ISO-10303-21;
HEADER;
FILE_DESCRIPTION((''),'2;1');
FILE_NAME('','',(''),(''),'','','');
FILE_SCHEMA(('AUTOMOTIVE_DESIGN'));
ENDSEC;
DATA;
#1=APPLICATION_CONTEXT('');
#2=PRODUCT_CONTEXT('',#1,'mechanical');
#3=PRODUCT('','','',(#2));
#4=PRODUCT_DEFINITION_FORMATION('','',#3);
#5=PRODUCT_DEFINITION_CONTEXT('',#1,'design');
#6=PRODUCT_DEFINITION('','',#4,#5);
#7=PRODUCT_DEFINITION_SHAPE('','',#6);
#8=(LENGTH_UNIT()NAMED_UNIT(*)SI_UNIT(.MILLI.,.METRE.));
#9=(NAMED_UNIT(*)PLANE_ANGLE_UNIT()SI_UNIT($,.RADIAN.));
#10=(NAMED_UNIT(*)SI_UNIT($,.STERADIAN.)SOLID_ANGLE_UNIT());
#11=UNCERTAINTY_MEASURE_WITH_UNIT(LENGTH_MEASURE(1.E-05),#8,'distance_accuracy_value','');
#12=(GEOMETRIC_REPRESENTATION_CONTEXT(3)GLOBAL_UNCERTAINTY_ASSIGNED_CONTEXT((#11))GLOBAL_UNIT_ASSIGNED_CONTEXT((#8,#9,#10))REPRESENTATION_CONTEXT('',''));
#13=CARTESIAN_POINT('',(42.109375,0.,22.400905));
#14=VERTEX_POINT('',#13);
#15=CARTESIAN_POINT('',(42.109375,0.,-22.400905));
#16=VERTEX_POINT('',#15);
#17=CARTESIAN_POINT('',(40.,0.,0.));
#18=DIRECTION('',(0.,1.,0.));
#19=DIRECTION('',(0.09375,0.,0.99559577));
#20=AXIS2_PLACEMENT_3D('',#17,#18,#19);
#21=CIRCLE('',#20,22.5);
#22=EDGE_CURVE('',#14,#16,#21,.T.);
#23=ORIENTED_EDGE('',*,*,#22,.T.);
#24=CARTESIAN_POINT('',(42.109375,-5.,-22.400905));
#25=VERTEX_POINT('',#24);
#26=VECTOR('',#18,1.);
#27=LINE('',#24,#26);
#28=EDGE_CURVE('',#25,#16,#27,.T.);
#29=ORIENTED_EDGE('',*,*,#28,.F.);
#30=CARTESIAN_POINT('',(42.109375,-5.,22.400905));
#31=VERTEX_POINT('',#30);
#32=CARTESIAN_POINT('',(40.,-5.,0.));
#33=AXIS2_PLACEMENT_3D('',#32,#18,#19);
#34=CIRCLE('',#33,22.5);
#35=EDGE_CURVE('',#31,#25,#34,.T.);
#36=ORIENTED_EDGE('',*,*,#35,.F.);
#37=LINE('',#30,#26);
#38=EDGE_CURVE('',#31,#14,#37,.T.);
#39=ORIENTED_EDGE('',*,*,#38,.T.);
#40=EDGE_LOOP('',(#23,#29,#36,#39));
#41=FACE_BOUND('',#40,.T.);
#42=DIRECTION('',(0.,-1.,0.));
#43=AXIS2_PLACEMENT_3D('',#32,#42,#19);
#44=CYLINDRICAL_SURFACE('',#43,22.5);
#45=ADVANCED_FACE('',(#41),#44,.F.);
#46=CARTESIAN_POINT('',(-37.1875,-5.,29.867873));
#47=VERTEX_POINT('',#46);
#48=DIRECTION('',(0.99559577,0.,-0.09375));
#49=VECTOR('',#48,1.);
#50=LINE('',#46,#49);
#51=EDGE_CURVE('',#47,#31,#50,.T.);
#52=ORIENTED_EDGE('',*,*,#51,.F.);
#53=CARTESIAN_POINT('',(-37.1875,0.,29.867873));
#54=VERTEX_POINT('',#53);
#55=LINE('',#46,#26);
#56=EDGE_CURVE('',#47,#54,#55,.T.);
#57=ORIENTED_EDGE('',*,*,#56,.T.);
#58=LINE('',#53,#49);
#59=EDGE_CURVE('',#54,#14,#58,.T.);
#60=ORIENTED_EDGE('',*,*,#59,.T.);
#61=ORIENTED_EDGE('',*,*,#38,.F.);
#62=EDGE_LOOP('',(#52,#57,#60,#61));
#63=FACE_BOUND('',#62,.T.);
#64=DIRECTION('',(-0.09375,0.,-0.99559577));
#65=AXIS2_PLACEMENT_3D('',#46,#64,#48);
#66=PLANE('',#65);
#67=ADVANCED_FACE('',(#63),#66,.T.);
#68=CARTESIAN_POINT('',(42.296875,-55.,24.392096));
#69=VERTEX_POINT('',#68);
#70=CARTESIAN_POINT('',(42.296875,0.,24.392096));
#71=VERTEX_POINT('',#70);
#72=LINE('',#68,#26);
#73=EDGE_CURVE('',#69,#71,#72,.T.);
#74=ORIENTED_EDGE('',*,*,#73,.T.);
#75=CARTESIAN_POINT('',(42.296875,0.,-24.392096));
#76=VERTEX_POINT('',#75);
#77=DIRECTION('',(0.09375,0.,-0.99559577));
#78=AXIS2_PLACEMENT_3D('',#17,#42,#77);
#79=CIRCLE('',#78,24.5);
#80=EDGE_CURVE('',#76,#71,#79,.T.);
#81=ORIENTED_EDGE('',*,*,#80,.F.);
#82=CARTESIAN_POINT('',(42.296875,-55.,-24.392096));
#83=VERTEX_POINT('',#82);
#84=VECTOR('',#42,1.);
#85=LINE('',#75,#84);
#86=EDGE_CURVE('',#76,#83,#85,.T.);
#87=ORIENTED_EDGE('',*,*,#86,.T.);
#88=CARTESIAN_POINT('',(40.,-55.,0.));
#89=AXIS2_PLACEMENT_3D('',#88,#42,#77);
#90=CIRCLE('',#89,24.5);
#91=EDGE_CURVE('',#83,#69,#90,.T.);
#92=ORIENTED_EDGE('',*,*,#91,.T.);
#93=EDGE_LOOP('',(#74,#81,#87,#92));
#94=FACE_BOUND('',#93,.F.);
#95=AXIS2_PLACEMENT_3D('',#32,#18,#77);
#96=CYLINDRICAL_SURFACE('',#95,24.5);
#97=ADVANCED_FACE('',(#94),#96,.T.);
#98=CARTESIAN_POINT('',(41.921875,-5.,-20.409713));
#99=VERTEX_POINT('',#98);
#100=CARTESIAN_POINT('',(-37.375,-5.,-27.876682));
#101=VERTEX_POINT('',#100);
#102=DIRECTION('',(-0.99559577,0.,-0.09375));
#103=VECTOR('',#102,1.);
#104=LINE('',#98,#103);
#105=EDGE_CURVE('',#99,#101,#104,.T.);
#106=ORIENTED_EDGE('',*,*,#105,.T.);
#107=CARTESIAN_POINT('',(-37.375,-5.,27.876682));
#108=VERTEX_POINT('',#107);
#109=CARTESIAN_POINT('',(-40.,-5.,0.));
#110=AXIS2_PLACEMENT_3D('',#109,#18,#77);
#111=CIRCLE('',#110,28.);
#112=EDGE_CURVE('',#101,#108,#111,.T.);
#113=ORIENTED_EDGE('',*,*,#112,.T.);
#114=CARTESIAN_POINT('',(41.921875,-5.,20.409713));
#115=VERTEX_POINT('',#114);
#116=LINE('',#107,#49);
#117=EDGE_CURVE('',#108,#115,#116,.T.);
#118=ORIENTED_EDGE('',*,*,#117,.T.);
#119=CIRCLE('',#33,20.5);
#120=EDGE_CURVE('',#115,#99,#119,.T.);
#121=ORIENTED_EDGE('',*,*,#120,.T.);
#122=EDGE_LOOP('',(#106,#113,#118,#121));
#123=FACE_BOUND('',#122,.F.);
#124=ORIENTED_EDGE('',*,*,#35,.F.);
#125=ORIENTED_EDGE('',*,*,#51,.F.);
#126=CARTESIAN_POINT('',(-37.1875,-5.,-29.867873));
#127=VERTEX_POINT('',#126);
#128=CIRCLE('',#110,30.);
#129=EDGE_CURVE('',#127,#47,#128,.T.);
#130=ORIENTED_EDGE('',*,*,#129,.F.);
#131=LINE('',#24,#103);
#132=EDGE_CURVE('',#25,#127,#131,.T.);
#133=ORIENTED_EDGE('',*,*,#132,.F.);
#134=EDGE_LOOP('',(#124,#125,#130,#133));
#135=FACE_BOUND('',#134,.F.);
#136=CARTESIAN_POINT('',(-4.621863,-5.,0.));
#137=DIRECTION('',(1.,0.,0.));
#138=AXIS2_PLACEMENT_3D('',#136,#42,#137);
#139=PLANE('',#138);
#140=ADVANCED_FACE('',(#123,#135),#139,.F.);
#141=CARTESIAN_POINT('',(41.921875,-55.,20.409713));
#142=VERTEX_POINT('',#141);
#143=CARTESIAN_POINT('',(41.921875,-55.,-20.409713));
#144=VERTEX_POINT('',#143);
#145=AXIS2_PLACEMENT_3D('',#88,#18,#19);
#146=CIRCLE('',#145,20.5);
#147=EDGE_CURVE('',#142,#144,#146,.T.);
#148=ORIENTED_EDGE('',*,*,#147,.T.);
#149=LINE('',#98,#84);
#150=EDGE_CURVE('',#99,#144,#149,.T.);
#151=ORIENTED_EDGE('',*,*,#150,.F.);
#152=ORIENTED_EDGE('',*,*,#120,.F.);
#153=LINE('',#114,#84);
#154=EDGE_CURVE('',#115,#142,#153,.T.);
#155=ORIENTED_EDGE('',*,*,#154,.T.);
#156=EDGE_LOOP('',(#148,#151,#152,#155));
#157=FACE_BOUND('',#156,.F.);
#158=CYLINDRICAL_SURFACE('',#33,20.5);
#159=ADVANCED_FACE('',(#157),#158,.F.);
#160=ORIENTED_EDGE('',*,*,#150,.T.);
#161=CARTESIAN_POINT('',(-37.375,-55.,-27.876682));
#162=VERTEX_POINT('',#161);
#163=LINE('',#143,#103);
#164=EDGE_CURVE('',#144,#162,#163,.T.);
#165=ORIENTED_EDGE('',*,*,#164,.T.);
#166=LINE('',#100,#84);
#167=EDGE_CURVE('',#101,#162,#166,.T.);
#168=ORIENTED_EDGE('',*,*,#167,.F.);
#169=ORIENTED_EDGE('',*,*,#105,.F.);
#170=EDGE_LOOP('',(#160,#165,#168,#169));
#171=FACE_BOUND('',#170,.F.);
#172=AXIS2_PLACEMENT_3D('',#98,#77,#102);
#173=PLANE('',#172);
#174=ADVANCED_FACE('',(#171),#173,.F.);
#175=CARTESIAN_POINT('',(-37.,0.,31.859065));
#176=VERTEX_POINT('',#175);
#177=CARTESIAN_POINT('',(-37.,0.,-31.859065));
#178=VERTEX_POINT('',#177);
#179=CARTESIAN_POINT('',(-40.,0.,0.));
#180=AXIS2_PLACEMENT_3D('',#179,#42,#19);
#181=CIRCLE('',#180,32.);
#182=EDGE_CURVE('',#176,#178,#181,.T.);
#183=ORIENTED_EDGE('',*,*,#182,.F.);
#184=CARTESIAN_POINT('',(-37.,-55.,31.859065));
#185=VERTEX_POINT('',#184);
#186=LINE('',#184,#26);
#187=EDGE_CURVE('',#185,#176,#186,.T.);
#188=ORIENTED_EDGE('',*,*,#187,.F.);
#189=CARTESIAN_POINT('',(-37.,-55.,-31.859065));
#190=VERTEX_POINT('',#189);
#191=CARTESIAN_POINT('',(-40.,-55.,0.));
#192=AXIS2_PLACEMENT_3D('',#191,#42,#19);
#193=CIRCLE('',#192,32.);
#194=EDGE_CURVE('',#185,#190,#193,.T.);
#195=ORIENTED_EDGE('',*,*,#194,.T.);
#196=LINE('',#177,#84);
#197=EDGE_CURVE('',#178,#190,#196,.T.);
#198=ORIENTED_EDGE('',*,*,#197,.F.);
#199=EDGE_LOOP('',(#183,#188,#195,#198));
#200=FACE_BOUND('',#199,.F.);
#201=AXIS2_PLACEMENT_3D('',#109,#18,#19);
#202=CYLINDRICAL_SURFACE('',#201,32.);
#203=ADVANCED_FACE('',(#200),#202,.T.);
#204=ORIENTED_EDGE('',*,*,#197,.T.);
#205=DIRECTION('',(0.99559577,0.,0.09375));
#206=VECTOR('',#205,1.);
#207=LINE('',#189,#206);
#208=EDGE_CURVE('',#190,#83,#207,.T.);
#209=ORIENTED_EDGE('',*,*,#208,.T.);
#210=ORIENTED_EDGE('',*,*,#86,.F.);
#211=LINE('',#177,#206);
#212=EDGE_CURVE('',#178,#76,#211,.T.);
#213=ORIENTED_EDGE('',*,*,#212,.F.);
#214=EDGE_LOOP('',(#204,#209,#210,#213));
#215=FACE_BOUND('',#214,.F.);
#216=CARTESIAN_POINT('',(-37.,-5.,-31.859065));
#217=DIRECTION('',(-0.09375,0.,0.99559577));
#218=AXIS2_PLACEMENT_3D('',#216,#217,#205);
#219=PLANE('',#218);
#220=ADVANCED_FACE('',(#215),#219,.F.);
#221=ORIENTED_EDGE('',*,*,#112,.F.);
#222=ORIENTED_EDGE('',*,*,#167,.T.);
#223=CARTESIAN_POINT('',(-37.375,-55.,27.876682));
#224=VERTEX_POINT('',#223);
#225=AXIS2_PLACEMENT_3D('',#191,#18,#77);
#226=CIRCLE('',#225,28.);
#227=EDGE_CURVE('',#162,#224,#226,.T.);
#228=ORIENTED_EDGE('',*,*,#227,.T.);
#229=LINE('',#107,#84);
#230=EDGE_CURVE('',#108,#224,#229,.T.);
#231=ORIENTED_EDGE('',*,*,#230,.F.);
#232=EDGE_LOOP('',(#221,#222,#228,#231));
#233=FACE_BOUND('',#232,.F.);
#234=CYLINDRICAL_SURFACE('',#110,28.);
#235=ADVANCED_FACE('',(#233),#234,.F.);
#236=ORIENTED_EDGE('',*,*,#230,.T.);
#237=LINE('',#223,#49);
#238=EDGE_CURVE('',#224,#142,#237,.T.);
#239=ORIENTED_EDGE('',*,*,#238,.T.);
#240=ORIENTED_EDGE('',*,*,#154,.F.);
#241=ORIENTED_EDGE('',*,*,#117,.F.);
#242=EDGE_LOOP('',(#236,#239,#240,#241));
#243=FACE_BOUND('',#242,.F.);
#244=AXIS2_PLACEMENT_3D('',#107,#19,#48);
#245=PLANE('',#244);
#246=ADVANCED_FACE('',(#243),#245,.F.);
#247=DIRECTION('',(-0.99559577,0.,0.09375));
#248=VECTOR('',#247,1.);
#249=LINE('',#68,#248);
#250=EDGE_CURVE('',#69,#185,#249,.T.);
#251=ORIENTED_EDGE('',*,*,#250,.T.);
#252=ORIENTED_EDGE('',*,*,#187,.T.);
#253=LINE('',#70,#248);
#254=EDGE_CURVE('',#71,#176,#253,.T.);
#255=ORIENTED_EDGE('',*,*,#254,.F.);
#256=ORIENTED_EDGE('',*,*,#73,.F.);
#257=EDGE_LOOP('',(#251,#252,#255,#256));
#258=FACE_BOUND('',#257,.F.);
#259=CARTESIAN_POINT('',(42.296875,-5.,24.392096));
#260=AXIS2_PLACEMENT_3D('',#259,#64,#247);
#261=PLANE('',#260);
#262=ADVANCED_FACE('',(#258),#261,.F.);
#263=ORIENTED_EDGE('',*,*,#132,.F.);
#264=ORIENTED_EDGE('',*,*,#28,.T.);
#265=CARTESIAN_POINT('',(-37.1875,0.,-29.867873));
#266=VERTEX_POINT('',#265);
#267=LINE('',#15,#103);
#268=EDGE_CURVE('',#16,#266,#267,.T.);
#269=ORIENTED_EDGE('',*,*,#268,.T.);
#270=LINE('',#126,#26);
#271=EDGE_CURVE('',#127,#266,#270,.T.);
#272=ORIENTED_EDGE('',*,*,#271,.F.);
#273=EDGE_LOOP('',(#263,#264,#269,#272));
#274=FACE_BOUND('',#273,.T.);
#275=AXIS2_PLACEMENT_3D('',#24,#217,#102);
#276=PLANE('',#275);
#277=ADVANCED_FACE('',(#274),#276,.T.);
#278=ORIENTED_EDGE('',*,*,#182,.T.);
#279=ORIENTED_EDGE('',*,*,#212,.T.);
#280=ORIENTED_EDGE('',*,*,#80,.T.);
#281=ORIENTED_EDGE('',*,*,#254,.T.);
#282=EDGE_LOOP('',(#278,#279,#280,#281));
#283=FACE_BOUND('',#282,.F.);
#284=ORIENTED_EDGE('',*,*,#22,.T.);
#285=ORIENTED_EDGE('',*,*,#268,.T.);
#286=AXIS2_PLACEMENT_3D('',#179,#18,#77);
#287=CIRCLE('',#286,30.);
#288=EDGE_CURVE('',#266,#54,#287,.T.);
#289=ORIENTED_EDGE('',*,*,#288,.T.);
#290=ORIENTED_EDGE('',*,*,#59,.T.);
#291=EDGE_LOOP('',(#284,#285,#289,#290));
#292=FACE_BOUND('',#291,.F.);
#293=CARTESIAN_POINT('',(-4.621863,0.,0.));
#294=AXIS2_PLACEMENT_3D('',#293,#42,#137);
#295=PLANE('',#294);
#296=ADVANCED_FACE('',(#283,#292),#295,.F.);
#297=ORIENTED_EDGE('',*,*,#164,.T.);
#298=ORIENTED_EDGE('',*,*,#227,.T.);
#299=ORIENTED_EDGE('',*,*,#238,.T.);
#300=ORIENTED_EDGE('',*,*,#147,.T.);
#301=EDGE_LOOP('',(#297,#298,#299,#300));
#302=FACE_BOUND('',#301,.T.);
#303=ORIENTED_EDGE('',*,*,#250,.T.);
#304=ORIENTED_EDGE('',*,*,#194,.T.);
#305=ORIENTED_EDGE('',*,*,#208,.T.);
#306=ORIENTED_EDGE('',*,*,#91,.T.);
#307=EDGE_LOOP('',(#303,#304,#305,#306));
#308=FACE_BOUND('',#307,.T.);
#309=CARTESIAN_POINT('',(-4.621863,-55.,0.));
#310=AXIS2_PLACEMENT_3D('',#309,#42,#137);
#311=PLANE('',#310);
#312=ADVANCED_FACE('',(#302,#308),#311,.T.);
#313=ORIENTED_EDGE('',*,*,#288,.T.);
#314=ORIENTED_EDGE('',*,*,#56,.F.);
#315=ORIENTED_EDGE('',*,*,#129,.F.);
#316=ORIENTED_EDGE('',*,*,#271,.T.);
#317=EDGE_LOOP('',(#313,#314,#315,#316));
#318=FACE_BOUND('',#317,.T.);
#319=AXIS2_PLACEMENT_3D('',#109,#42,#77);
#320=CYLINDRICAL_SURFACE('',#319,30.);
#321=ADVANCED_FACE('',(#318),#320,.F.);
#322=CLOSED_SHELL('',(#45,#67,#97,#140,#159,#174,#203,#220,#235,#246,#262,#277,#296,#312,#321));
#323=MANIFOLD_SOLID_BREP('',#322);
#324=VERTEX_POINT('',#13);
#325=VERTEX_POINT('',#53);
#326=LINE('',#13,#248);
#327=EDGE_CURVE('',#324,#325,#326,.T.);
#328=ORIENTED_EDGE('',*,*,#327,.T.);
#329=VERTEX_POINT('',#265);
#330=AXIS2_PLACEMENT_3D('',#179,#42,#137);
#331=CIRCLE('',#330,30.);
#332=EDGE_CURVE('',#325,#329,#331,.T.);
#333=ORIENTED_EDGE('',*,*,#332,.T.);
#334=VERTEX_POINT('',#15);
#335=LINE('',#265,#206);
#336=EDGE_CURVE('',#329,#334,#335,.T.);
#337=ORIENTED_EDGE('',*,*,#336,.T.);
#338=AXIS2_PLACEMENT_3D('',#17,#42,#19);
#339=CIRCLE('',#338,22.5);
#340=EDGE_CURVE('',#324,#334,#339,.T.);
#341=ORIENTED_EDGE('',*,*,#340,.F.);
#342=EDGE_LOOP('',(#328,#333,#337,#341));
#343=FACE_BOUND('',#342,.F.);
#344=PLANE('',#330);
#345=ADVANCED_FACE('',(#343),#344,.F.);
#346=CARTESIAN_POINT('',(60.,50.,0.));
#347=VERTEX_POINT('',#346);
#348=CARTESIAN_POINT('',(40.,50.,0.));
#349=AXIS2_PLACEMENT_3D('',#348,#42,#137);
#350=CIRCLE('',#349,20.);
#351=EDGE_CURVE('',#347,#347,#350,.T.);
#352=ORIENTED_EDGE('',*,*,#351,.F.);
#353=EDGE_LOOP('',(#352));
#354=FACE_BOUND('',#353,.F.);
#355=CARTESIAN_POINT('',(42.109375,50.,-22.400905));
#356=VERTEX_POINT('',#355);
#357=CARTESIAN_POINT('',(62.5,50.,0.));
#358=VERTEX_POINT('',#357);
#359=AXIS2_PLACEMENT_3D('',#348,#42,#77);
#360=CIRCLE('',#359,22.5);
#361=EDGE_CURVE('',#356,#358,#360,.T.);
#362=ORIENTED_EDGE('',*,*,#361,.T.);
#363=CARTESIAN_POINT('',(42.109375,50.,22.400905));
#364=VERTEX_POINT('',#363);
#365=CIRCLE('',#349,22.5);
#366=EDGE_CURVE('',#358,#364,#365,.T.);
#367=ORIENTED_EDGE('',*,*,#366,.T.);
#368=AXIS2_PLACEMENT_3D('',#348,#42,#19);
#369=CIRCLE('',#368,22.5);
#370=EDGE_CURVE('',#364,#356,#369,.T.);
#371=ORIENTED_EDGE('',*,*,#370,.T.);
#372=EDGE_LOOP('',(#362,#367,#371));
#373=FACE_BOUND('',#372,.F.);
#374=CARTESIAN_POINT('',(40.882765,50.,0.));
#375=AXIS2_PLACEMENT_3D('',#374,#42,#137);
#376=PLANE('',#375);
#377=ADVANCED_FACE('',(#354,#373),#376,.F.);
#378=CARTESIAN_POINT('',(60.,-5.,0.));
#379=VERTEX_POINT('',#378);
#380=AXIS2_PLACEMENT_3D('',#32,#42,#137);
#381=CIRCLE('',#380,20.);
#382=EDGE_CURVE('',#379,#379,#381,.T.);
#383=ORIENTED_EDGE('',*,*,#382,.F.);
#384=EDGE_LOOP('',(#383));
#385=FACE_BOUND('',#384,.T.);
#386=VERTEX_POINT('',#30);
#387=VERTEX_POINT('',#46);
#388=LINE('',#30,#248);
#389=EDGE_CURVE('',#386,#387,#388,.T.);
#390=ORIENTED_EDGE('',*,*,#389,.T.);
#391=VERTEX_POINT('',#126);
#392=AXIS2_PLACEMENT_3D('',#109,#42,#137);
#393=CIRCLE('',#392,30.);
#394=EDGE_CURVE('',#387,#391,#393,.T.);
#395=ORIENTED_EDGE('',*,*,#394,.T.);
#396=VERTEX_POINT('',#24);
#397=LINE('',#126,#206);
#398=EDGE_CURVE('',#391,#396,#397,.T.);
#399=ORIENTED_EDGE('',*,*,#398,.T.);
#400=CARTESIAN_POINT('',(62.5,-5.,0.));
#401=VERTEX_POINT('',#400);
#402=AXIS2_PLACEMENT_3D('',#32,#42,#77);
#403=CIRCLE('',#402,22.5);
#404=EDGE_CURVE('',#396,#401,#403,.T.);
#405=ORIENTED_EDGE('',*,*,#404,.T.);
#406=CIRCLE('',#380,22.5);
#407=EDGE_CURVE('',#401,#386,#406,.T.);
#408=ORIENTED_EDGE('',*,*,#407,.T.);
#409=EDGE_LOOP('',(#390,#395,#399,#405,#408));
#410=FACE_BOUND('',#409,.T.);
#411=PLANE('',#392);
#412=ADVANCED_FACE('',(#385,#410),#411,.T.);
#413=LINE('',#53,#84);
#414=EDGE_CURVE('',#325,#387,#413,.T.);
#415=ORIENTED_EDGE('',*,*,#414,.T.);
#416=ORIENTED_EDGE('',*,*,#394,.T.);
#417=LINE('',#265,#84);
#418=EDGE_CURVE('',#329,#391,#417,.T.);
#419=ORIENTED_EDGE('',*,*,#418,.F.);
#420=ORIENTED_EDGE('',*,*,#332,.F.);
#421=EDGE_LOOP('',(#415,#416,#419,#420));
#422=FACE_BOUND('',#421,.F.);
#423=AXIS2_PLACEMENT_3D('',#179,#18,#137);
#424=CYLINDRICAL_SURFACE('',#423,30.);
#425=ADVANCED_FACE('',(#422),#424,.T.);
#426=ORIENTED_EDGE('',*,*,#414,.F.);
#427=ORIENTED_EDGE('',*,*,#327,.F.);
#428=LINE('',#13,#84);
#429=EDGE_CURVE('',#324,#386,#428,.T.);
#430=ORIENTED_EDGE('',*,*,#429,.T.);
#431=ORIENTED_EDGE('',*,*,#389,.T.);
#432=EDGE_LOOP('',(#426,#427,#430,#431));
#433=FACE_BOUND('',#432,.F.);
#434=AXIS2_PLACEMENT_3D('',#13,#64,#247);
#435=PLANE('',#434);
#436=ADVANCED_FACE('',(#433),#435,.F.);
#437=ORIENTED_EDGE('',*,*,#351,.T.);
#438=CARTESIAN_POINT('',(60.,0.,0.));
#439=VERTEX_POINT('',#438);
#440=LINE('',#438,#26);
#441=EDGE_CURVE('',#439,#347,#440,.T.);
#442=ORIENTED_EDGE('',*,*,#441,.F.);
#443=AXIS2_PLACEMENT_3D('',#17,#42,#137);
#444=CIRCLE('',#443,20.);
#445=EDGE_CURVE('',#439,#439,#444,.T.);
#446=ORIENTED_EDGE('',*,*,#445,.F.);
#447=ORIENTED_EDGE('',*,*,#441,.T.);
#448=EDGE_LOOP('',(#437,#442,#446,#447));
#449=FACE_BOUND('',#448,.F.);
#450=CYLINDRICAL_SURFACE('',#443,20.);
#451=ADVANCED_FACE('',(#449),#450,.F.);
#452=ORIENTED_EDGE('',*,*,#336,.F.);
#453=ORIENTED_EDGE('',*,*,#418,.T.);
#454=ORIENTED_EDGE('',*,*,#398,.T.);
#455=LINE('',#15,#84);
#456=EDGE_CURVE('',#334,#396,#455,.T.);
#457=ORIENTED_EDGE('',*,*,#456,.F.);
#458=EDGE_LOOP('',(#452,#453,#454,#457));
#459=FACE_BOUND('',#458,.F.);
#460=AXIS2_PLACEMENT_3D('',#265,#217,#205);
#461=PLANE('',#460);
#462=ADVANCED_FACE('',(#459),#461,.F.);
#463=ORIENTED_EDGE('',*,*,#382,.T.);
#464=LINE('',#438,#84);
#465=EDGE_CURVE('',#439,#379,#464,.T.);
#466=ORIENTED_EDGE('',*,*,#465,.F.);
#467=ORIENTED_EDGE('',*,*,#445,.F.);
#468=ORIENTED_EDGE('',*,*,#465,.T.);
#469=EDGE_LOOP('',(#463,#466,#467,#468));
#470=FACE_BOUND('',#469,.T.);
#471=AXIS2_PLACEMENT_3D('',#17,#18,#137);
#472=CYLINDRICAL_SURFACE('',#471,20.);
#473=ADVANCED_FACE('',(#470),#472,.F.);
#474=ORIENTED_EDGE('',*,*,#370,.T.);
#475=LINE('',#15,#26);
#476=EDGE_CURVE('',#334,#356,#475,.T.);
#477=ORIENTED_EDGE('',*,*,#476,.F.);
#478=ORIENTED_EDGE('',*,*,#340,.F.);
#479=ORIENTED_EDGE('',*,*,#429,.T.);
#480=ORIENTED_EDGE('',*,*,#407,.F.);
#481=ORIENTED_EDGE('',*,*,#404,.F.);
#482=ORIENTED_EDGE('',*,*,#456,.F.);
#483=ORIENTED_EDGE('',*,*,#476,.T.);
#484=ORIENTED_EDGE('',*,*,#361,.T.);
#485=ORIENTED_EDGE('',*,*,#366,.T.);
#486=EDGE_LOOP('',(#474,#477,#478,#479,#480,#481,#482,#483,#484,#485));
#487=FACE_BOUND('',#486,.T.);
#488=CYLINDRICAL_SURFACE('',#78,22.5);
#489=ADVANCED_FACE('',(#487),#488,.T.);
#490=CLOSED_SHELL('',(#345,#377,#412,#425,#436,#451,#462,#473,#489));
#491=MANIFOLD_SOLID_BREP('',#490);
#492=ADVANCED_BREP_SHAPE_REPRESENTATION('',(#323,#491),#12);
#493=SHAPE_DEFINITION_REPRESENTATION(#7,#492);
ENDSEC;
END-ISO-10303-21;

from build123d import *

# Parameters (mm, degrees)
F0_R     = 20
F1_DEPTH = 5
F2_DEPTH = 50
F4_DEPTH = 5
F5_DEPTH = 50


with BuildPart() as f1:
    # F0 (on Front) → F1 (new body)
    with BuildSketch(Plane.XZ):
        with BuildLine():
            ThreePointArc((-10, 0), (-17.8147008134, 20.1943680268), (-37.1875, 29.8678731039))
            ThreePointArc((-37.1875, 29.8678731039), (-70, 0), (-37.1875, -29.8678731039))
            ThreePointArc((-37.1875, -29.8678731039), (-17.8147008134, -20.1943680268), (-10, 0))
        make_face()
        with BuildLine():
            ThreePointArc((42.109375, -22.4009048279), (17.5, 0), (42.109375, 22.4009048279))
            Line((42.109375, 22.4009048279), (-37.1875, 29.8678731039))
            ThreePointArc((-37.1875, 29.8678731039), (-17.8147008134, 20.1943680268), (-10, 0))
            ThreePointArc((-10, 0), (-17.8147008134, -20.1943680268), (-37.1875, -29.8678731039))
            Line((-37.1875, -29.8678731039), (42.109375, -22.4009048279))
        make_face()
        with BuildLine():
            ThreePointArc((42.109375, -22.4009048279), (56.63897439, -15.1457760201), (62.5, 0))
            ThreePointArc((62.5, 0), (56.63897439, 15.1457760201), (42.109375, 22.4009048279))
            ThreePointArc((42.109375, 22.4009048279), (17.5, 0), (42.109375, -22.4009048279))
        make_face()
        with Locations((40, 0)):
            Circle(F0_R, mode=Mode.SUBTRACT)
    extrude(amount=F1_DEPTH)

    # F0 (on Front) → F2 (join)
    with BuildSketch(Plane.XZ):
        with BuildLine():
            ThreePointArc((42.109375, -22.4009048279), (56.63897439, -15.1457760201), (62.5, 0))
            ThreePointArc((62.5, 0), (56.63897439, 15.1457760201), (42.109375, 22.4009048279))
            ThreePointArc((42.109375, 22.4009048279), (17.5, 0), (42.109375, -22.4009048279))
        make_face()
        with Locations((40, 0)):
            Circle(F0_R, mode=Mode.SUBTRACT)
    extrude(amount=-F2_DEPTH)


with BuildPart() as f4:
    # F3 (on face) → F4 (new body)
    with BuildSketch(Plane.XZ.offset(5)):
        with BuildLine():
            ThreePointArc((-37, 31.8590646441), (-72, 0), (-37, -31.8590646441))
            Line((-37, -31.8590646441), (42.296875, -24.3920963682))
            ThreePointArc((42.296875, -24.3920963682), (64.5, 0), (42.296875, 24.3920963682))
            Line((42.296875, 24.3920963682), (-37, 31.8590646441))
        make_face()
        with BuildLine():
            ThreePointArc((-37.1875, -29.8678731039), (-70, 0), (-37.1875, 29.8678731039))
            Line((-37.1875, 29.8678731039), (42.109375, 22.4009048279))
            ThreePointArc((42.109375, 22.4009048279), (62.5, 0), (42.109375, -22.4009048279))
            Line((42.109375, -22.4009048279), (-37.1875, -29.8678731039))
        make_face(mode=Mode.SUBTRACT)
    extrude(amount=-F4_DEPTH)

    # F3 (on face) → F5 (join)
    with BuildSketch(Plane.XZ.offset(5)):
        with BuildLine():
            ThreePointArc((-37, 31.8590646441), (-72, 0), (-37, -31.8590646441))
            Line((-37, -31.8590646441), (42.296875, -24.3920963682))
            ThreePointArc((42.296875, -24.3920963682), (64.5, 0), (42.296875, 24.3920963682))
            Line((42.296875, 24.3920963682), (-37, 31.8590646441))
        make_face()
        with BuildLine():
            ThreePointArc((-37.1875, -29.8678731039), (-70, 0), (-37.1875, 29.8678731039))
            Line((-37.1875, 29.8678731039), (42.109375, 22.4009048279))
            ThreePointArc((42.109375, 22.4009048279), (62.5, 0), (42.109375, -22.4009048279))
            Line((42.109375, -22.4009048279), (-37.1875, -29.8678731039))
        make_face(mode=Mode.SUBTRACT)
        with BuildLine():
            Line((42.109375, 22.4009048279), (-37.1875, 29.8678731039))
            ThreePointArc((-37.1875, 29.8678731039), (-70, 0), (-37.1875, -29.8678731039))
            Line((-37.1875, -29.8678731039), (42.109375, -22.4009048279))
            ThreePointArc((42.109375, -22.4009048279), (62.5, 0), (42.109375, 22.4009048279))
        make_face()
        with BuildLine():
            ThreePointArc((-37.375, -27.8766815636), (-68, 0), (-37.375, 27.8766815636))
            Line((-37.375, 27.8766815636), (41.921875, 20.4097132877))
            ThreePointArc((41.921875, 20.4097132877), (60.5, 0), (41.921875, -20.4097132877))
            Line((41.921875, -20.4097132877), (-37.375, -27.8766815636))
        make_face(mode=Mode.SUBTRACT)
    extrude(amount=F5_DEPTH)


solid = Compound([f1.part, f4.part])
